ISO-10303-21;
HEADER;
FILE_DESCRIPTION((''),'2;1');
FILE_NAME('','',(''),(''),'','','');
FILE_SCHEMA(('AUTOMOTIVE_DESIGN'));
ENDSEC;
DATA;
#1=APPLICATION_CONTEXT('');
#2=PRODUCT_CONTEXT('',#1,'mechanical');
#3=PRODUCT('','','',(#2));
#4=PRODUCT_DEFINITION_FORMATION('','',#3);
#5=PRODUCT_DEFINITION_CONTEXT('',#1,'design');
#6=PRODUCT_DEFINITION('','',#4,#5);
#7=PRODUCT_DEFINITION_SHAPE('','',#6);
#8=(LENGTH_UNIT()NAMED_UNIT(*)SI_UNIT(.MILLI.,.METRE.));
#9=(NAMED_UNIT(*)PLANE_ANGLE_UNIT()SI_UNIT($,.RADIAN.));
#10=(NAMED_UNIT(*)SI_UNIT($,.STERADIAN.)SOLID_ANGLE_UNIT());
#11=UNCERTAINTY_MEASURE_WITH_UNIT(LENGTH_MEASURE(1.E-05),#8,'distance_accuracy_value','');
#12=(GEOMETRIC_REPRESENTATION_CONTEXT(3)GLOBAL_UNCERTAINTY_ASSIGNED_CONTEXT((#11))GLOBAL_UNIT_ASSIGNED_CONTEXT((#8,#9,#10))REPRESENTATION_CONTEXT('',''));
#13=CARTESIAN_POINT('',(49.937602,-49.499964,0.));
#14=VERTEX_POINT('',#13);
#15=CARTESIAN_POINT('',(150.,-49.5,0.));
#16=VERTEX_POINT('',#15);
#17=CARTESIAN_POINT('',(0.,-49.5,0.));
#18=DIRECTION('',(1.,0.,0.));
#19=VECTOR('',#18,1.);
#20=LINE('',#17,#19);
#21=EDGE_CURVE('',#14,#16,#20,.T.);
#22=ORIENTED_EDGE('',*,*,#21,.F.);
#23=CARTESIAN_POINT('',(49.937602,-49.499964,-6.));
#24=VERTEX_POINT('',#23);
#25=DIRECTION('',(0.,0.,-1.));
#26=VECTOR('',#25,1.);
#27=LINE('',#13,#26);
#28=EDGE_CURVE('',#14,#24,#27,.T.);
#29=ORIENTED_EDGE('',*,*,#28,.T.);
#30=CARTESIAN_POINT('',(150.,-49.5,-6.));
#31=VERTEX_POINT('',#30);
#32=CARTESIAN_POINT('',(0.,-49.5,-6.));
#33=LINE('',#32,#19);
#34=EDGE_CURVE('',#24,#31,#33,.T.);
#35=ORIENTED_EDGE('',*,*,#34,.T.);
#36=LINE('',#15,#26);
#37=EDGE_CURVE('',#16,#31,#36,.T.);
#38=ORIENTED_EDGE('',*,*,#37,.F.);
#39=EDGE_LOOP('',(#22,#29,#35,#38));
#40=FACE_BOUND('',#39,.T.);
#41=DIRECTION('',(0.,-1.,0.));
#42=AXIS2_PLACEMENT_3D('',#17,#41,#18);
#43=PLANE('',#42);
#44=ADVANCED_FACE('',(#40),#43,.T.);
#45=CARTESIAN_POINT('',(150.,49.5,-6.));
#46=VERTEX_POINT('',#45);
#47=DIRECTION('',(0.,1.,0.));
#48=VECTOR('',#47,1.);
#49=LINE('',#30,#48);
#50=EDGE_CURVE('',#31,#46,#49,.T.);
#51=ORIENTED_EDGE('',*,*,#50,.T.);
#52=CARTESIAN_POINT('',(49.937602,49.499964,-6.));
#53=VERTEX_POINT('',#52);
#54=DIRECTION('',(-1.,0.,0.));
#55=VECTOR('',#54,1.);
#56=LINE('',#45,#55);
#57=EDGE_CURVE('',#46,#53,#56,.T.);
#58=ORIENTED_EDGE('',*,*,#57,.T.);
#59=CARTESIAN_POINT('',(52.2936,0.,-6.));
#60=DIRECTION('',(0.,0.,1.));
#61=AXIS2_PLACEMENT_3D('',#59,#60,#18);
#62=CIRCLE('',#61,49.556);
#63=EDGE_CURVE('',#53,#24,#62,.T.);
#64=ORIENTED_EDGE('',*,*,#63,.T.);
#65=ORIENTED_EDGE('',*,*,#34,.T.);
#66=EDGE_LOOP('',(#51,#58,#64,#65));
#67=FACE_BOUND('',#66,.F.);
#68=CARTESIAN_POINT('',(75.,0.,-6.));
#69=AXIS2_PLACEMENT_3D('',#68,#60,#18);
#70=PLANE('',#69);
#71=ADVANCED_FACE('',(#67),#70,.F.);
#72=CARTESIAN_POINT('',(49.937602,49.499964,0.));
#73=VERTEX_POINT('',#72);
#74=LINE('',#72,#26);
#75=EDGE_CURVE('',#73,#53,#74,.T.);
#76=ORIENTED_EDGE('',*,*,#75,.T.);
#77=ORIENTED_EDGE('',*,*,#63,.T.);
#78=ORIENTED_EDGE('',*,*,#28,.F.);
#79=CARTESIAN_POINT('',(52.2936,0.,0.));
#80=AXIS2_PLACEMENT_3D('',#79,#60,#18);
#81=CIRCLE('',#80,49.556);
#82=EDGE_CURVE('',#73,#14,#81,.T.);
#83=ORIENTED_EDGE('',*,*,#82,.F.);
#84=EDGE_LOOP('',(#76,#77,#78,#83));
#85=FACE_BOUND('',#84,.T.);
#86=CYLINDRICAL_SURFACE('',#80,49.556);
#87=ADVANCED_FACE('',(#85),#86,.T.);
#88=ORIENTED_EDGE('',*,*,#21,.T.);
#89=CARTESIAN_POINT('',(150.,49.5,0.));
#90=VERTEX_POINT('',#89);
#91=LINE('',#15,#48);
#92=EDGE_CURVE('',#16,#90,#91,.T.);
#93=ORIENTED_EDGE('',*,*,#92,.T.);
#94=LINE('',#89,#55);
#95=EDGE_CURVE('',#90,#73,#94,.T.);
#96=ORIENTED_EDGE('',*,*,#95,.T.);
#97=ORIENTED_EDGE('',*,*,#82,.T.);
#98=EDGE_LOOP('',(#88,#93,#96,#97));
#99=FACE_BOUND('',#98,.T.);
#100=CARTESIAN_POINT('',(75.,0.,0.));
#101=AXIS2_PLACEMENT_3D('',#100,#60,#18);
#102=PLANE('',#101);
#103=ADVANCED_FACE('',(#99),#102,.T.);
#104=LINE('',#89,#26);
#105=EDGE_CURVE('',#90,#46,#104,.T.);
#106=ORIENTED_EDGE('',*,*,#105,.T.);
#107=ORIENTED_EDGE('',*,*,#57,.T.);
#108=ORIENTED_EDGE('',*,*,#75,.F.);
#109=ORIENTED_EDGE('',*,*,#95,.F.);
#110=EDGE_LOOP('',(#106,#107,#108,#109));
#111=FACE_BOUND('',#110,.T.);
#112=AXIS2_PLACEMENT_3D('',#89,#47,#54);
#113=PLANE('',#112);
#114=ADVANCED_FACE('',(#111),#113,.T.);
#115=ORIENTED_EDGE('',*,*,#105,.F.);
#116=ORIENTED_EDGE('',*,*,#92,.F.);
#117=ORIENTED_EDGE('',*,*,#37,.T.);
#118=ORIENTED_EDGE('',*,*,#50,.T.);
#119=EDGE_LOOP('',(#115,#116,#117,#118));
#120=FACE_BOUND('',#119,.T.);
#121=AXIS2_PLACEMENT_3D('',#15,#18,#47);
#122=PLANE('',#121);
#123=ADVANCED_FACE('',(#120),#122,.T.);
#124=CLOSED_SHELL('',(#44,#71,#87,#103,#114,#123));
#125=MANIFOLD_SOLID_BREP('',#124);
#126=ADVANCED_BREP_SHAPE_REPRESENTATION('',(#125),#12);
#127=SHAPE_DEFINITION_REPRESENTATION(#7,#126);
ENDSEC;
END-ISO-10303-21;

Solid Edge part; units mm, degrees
sketch "Sketch1" plane through (0, 0, 0) normal (0, 0, 1) x (1, 0, 0)
  line L0 (0, 0) -> (0, -49.5)
  line L1 (0, -49.5) -> (150, -49.5)
  line L2 (150, -49.5) -> (150, 49.5)
  line L3 (150, 49.5) -> (0, 49.5)
  line L4 (0, 49.5) -> (0, 0)
extrude "Protrusion1" add sketch "Sketch1" against normal blind 6
sketch "Sketch2" plane through (75, 0, 0) normal (0, 0, 1) x (1, 0, 0)
  line L0 (-25.0624, 49.5) -> (-75, 49.5)
  line L1 (-75, 49.5) -> (-75, -49.5)
  line L2 (-75, -49.5) -> (-25.0624, -49.5)
  arc A0 (-25.0624, 49.5) -> (-25.0624, -49.5) centre (-22.7064, 0) ccw
extrude "Recorte_Extrudado_1" cut sketch "Sketch2" against normal blind 6
